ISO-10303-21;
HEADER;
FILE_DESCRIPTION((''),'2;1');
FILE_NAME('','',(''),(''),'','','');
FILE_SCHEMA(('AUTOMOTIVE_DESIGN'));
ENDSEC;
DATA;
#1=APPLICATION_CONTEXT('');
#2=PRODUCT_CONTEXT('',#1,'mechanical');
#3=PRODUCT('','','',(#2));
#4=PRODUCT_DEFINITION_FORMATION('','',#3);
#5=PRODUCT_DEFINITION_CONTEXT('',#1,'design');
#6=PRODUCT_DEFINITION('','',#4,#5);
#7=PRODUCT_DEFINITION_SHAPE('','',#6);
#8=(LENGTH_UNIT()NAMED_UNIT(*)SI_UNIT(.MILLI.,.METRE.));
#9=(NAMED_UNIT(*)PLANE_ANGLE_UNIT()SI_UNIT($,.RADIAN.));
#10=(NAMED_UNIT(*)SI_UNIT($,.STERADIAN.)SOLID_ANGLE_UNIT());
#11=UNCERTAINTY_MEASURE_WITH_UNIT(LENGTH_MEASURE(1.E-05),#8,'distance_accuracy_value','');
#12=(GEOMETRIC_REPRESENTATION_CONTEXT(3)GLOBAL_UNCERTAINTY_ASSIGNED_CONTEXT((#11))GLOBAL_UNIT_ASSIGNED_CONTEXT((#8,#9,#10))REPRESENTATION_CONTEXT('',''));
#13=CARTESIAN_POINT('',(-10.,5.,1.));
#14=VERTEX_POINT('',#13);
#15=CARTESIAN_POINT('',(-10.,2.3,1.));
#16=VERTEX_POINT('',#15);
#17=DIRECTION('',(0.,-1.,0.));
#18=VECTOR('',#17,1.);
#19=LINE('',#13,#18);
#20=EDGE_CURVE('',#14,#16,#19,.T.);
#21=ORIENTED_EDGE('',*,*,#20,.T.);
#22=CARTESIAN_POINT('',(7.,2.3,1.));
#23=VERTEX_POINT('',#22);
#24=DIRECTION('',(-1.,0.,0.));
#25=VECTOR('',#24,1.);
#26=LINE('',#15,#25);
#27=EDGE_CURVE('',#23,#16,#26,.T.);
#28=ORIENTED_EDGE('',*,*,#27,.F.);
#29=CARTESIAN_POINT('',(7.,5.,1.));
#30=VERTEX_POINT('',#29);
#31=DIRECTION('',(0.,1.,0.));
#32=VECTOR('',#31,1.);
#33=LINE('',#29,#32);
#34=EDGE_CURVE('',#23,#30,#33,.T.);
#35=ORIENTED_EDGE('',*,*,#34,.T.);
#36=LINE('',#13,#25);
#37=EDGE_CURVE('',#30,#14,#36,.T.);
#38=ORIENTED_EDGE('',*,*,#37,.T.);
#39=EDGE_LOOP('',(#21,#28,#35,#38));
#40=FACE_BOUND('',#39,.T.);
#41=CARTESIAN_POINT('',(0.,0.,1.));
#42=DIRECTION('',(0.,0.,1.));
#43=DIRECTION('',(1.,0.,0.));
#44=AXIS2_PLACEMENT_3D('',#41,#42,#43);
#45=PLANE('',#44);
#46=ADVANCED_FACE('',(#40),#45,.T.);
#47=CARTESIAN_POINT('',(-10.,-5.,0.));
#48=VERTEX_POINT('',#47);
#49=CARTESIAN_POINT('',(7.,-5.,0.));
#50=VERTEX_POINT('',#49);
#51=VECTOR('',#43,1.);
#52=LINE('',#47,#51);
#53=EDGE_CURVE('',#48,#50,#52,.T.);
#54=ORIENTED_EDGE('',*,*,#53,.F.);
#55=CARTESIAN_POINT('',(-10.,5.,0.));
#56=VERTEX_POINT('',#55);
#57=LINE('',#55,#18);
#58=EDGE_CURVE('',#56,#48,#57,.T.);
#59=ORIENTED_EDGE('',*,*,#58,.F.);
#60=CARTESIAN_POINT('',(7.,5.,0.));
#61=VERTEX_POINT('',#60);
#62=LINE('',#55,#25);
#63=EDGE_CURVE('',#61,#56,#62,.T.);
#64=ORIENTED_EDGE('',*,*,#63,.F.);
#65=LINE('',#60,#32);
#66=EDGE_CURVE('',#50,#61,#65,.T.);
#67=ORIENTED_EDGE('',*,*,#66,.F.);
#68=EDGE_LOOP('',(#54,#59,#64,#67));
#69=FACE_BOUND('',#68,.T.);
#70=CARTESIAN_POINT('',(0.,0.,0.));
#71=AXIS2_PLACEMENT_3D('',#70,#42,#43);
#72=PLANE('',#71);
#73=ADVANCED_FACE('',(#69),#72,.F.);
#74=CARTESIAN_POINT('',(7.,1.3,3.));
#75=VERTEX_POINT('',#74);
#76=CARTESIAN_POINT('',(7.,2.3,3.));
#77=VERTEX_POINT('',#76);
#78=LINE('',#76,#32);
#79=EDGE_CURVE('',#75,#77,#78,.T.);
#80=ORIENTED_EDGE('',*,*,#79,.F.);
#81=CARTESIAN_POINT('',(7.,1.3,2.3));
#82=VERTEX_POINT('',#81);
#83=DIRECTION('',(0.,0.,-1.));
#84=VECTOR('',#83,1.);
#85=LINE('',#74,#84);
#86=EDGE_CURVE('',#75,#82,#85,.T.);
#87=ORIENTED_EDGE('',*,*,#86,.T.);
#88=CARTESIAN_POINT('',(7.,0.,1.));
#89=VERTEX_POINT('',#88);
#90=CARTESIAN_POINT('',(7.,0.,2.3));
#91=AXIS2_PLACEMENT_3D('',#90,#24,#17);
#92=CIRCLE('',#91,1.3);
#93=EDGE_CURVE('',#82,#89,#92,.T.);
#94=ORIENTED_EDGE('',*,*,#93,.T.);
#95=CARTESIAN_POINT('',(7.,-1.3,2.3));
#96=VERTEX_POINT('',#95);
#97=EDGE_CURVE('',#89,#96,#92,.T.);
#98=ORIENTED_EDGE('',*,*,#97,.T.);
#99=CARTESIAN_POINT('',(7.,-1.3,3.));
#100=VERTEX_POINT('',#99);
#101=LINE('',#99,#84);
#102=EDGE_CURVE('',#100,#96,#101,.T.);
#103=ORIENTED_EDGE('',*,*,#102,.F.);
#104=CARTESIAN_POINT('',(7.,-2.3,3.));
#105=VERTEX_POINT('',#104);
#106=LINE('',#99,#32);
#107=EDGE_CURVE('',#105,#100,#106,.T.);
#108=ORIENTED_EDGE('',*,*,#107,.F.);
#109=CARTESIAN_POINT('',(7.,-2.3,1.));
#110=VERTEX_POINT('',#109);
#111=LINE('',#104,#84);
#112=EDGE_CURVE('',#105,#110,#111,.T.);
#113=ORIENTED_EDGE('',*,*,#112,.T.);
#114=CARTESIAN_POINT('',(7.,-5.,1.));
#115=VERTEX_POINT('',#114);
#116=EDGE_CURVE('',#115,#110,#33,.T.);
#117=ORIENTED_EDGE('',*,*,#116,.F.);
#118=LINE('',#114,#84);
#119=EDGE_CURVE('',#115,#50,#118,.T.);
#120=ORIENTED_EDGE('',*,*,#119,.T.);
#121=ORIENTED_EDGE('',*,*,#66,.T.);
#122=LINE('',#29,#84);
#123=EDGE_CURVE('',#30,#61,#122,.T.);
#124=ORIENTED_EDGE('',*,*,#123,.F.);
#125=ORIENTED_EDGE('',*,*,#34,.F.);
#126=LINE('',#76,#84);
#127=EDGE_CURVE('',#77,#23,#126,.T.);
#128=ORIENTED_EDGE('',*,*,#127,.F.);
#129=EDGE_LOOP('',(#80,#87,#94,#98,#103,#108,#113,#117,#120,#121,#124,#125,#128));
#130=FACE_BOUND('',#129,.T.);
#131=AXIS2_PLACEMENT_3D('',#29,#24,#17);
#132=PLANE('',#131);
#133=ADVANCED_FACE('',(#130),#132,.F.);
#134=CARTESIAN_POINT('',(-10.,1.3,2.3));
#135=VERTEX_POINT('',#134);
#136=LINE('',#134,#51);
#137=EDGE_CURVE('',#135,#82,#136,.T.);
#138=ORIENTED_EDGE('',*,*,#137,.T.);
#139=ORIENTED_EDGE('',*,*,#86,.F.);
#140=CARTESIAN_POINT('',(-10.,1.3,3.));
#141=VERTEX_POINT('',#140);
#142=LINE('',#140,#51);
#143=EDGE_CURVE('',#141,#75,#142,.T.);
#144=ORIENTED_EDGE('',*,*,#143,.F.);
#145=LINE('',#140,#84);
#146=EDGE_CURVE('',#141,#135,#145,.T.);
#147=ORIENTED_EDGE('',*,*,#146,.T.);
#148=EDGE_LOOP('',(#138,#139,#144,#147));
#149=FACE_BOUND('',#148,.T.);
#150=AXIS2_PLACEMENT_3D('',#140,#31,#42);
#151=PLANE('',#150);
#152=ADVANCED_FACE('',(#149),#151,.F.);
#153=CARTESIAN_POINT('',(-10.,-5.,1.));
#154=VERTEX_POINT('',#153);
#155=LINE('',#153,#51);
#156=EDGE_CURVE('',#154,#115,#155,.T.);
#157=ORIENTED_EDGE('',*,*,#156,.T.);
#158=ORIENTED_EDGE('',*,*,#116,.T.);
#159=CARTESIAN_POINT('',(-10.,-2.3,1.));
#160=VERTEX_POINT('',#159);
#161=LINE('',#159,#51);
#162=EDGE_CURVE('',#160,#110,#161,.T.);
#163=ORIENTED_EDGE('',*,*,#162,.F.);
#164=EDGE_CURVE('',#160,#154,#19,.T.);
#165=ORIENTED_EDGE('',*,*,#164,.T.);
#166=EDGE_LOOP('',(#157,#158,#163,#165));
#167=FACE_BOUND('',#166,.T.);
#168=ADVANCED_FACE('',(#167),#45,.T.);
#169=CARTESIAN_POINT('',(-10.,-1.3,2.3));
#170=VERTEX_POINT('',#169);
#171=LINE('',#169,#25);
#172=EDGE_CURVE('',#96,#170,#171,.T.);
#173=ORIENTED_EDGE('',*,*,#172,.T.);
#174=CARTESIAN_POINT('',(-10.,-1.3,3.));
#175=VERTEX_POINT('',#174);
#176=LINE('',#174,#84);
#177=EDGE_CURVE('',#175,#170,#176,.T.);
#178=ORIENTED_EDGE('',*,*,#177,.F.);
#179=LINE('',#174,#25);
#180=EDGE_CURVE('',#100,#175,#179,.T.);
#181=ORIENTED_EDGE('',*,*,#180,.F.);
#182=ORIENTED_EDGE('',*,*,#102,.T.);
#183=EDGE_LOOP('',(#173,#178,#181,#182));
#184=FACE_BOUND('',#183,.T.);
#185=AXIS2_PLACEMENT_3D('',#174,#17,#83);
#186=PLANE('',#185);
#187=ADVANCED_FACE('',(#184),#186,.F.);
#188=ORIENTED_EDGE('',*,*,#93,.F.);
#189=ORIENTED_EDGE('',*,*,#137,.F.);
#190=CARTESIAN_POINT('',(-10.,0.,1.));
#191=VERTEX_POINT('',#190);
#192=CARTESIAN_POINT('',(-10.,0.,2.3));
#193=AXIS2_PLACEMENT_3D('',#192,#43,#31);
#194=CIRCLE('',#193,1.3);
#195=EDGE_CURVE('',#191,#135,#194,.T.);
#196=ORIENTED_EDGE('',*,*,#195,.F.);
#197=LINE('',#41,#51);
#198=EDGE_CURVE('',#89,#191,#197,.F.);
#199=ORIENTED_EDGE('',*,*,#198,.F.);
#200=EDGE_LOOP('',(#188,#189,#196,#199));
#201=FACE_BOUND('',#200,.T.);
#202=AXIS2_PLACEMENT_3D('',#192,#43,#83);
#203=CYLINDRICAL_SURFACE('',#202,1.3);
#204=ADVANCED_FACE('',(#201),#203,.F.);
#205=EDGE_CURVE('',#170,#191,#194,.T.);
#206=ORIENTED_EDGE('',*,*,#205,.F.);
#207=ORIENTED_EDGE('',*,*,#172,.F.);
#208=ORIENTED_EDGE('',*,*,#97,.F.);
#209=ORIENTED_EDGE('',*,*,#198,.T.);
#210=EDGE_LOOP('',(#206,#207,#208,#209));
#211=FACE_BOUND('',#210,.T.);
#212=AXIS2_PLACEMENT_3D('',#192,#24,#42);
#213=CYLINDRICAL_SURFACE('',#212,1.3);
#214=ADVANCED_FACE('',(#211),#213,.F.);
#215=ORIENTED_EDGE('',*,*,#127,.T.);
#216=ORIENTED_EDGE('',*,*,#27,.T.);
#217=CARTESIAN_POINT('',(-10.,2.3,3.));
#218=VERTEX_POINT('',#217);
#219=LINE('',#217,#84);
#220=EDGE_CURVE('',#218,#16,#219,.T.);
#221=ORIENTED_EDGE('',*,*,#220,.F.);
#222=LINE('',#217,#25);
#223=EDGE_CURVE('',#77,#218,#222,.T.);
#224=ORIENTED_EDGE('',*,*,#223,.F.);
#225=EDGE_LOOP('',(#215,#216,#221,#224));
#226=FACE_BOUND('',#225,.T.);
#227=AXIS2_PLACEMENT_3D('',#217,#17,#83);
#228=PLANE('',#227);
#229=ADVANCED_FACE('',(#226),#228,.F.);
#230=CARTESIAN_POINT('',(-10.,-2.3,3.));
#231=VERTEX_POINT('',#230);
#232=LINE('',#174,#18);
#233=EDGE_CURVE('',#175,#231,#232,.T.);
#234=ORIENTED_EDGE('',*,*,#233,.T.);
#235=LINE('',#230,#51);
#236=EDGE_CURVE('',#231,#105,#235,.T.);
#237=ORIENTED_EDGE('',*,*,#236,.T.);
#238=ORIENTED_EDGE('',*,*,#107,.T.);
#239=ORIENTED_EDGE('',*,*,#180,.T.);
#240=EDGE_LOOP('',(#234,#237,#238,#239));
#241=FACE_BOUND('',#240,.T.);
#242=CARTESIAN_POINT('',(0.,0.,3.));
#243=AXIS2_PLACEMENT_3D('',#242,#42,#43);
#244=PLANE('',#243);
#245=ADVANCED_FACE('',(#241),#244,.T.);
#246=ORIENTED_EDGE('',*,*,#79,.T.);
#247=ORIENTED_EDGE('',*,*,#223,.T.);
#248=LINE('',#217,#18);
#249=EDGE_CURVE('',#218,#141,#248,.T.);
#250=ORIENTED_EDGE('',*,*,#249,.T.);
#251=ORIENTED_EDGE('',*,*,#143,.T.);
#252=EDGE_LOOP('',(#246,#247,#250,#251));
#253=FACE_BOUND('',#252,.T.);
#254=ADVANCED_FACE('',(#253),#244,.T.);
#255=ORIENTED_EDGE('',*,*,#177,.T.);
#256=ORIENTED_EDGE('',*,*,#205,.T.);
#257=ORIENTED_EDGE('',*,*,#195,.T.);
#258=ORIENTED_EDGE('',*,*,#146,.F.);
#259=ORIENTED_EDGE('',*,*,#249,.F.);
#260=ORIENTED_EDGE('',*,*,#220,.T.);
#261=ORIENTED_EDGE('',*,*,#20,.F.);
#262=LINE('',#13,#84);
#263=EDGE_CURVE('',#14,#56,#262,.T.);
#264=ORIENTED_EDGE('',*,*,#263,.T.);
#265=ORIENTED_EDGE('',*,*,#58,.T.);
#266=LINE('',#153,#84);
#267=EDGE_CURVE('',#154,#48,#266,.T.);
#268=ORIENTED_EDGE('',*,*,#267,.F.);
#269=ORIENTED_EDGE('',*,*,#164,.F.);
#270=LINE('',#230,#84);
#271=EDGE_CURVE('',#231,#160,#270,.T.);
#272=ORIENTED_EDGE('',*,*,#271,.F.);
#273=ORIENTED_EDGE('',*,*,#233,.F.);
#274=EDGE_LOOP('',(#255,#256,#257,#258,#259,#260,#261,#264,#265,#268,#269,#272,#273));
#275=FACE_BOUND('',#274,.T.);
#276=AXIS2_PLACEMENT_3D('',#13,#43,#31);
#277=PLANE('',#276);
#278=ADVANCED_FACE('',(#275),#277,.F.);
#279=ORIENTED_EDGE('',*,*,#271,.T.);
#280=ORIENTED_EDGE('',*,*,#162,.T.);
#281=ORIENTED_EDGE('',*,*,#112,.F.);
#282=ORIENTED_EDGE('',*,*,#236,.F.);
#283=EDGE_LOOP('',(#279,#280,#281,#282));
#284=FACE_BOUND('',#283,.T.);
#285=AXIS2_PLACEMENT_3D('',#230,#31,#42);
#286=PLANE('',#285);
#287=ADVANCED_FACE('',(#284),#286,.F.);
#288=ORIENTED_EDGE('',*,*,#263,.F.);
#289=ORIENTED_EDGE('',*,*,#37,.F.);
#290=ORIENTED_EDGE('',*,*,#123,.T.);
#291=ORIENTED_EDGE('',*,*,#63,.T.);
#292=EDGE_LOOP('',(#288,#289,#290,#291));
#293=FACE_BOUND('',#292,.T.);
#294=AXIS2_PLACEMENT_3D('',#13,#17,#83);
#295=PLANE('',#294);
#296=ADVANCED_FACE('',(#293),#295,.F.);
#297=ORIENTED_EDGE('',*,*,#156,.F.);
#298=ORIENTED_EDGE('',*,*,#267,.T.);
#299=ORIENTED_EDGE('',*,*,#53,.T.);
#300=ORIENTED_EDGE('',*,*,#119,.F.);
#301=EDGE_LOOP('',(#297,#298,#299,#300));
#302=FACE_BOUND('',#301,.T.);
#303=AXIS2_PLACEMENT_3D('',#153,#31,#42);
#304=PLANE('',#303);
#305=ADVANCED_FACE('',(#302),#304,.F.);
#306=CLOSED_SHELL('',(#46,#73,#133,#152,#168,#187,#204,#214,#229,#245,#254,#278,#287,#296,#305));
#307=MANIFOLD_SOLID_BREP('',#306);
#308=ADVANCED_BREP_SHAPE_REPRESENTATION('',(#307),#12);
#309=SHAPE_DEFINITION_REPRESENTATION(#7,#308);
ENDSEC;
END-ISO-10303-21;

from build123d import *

# Parameters (mm, degrees)
SKIZZE1_W                       = 17
SKIZZE1_H                       = 10
AUFSATZ_LINEAR_AUSTRAGEN1_DEPTH = 1
SKIZZE2_W                       = 17
SKIZZE2_H                       = 1
AUFSATZ_LINEAR_AUSTRAGEN2_DEPTH = 2
VERRUNDUNG1_R                   = 1.3


with BuildPart() as part:
    # Skizze1 → Aufsatz-Linear austragen1 (new body)
    with BuildSketch(Plane.XY):
        with Locations((-1.5, 0)):
            Rectangle(SKIZZE1_W, SKIZZE1_H)
    extrude(amount=AUFSATZ_LINEAR_AUSTRAGEN1_DEPTH)

    # Skizze2 → Aufsatz-Linear austragen2 (add)
    with BuildSketch(Plane.XY.offset(1)):
        with Locations((-1.5, 1.8)):
            Rectangle(SKIZZE2_W, SKIZZE2_H)
        with Locations((-1.5, -1.8)):
            Rectangle(SKIZZE2_W, SKIZZE2_H)
    extrude(amount=AUFSATZ_LINEAR_AUSTRAGEN2_DEPTH)

    # Verrundung1
    verrundung1_edges = [part.edges().sort_by_distance(p)[0] for p in [
        (-1.5, -1.3, 1),
        (-1.5, 1.3, 1),
    ]]
    fillet(verrundung1_edges, radius=VERRUNDUNG1_R - 0.0001)  # a hair under: the kernel refuses the full size


solid = part.part
